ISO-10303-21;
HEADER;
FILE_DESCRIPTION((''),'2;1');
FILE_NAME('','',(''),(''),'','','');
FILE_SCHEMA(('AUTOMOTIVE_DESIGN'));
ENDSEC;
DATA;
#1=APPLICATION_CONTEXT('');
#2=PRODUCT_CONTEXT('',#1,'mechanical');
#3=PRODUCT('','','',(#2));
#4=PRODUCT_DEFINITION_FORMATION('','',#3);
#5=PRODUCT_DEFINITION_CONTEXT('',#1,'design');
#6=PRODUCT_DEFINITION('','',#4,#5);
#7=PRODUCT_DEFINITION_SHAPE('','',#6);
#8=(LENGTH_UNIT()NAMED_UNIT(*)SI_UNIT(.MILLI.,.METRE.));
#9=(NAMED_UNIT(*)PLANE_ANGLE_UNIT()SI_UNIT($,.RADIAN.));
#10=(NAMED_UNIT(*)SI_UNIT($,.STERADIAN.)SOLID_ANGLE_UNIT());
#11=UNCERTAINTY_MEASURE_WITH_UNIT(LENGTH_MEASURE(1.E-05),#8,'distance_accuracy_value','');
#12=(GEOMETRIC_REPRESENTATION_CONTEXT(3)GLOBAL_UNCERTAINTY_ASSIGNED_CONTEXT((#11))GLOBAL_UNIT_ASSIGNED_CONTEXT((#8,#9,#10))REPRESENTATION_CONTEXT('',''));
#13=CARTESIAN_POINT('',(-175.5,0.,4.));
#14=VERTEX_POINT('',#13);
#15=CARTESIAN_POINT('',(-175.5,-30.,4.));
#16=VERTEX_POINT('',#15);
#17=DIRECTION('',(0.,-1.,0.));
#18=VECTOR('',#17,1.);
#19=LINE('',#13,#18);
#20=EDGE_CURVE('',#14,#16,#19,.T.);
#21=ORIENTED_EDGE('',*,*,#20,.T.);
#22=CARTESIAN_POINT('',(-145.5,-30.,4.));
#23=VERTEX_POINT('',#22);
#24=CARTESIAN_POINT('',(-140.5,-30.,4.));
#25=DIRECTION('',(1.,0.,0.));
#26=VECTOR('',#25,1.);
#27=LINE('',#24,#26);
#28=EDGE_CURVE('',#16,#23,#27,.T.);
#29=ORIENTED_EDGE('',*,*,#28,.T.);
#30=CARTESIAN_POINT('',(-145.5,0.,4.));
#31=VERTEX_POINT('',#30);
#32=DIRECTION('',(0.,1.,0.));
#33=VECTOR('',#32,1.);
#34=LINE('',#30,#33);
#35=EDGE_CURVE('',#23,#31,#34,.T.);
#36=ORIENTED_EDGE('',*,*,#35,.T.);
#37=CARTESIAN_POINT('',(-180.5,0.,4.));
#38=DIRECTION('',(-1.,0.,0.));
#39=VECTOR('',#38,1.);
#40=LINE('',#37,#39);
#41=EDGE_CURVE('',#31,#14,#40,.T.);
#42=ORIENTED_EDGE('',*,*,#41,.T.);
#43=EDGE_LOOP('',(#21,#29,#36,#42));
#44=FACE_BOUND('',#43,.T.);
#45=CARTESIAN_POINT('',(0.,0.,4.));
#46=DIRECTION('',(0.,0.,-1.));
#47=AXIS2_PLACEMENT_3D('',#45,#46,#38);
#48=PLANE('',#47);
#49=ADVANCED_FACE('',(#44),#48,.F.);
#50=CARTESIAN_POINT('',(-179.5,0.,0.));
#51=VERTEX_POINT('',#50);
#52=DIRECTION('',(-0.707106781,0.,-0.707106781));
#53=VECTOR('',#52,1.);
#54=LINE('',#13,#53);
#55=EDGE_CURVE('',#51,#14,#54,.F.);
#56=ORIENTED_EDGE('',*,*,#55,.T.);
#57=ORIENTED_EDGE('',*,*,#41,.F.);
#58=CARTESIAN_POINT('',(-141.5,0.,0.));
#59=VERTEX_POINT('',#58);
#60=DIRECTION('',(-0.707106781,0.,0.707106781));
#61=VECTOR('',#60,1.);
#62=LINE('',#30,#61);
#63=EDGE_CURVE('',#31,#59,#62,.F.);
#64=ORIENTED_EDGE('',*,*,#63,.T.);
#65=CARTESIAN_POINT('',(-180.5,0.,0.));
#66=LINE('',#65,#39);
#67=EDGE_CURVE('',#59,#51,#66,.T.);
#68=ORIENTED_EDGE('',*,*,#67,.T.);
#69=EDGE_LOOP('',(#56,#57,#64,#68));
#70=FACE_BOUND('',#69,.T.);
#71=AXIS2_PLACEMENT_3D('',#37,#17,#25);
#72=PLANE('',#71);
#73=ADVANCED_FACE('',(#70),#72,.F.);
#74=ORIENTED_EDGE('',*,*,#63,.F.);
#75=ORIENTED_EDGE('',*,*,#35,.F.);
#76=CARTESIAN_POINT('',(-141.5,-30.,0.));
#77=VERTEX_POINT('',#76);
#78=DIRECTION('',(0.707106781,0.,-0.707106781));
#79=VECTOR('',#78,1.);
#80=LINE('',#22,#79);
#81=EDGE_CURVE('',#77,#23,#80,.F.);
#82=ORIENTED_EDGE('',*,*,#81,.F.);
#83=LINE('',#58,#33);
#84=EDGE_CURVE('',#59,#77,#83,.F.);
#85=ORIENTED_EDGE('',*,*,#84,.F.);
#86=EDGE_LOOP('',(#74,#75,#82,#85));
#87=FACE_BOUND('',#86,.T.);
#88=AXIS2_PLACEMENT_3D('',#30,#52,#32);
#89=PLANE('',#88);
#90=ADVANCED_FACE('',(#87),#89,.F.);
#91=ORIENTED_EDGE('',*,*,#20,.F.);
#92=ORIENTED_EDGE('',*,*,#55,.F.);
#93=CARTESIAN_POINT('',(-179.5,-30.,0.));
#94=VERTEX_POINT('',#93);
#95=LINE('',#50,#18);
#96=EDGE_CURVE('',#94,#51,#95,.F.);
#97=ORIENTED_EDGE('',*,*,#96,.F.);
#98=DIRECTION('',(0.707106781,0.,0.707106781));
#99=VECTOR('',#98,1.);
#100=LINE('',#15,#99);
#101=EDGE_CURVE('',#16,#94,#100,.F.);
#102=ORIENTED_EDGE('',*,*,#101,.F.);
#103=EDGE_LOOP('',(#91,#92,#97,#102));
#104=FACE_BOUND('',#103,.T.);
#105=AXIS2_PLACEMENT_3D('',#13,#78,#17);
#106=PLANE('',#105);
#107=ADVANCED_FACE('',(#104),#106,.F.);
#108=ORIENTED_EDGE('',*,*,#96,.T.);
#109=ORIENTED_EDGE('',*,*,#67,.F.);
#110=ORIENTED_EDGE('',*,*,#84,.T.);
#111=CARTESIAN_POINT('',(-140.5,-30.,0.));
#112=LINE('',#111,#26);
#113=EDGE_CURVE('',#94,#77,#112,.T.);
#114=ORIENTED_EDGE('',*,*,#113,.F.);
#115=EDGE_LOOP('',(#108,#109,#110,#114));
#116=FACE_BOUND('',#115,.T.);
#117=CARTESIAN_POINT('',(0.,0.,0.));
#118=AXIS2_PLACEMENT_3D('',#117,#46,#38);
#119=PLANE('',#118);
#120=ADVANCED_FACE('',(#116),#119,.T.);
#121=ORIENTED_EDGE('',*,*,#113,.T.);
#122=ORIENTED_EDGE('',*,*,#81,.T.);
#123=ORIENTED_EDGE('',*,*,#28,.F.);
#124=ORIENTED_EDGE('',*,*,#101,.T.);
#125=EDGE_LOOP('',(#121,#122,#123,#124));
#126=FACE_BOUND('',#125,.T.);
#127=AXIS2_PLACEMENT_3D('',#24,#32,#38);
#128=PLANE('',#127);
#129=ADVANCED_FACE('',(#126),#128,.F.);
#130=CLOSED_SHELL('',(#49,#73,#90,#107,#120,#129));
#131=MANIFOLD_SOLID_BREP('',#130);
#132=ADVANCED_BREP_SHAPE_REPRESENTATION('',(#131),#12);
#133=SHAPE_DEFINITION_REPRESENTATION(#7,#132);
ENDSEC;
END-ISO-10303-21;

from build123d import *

# Parameters (mm, degrees)
SKETCH1_W           = 40
SKETCH1_H           = 30
BOSS_EXTRUDE1_DEPTH = 4
CHAMFER1_SIZE       = 5


with BuildPart() as part:
    # Sketch1 → Boss-Extrude1 (new body)
    with BuildSketch(Plane.XY):
        with Locations((-160.5, -15)):
            Rectangle(SKETCH1_W, SKETCH1_H)
    extrude(amount=BOSS_EXTRUDE1_DEPTH)

    # Chamfer1
    # the kernel refuses this chamfer: 5 mm, written as the material it takes off along each edge
    with BuildSketch(Plane(origin=(-180.5, -42.85841494, 4), x_dir=(-0.0274958766105877, 0, -0.9996219169112968), z_dir=(0, 1, 0)), Plane(origin=(-140.5, 12.85841494, 4), x_dir=(0.0274958766105877, 0, -0.9996219169112968), z_dir=(0, -1, 0))) as chamfer1_piece_1:
        Polygon((CHAMFER1_SIZE * 0.999621916911, -CHAMFER1_SIZE * 0.0274958766106), (-CHAMFER1_SIZE * 0.0274958766106, -CHAMFER1_SIZE * 0.999621916911), (0, 0), align=None)
    extrude(amount=55.71682988, mode=Mode.SUBTRACT)


solid = part.part
